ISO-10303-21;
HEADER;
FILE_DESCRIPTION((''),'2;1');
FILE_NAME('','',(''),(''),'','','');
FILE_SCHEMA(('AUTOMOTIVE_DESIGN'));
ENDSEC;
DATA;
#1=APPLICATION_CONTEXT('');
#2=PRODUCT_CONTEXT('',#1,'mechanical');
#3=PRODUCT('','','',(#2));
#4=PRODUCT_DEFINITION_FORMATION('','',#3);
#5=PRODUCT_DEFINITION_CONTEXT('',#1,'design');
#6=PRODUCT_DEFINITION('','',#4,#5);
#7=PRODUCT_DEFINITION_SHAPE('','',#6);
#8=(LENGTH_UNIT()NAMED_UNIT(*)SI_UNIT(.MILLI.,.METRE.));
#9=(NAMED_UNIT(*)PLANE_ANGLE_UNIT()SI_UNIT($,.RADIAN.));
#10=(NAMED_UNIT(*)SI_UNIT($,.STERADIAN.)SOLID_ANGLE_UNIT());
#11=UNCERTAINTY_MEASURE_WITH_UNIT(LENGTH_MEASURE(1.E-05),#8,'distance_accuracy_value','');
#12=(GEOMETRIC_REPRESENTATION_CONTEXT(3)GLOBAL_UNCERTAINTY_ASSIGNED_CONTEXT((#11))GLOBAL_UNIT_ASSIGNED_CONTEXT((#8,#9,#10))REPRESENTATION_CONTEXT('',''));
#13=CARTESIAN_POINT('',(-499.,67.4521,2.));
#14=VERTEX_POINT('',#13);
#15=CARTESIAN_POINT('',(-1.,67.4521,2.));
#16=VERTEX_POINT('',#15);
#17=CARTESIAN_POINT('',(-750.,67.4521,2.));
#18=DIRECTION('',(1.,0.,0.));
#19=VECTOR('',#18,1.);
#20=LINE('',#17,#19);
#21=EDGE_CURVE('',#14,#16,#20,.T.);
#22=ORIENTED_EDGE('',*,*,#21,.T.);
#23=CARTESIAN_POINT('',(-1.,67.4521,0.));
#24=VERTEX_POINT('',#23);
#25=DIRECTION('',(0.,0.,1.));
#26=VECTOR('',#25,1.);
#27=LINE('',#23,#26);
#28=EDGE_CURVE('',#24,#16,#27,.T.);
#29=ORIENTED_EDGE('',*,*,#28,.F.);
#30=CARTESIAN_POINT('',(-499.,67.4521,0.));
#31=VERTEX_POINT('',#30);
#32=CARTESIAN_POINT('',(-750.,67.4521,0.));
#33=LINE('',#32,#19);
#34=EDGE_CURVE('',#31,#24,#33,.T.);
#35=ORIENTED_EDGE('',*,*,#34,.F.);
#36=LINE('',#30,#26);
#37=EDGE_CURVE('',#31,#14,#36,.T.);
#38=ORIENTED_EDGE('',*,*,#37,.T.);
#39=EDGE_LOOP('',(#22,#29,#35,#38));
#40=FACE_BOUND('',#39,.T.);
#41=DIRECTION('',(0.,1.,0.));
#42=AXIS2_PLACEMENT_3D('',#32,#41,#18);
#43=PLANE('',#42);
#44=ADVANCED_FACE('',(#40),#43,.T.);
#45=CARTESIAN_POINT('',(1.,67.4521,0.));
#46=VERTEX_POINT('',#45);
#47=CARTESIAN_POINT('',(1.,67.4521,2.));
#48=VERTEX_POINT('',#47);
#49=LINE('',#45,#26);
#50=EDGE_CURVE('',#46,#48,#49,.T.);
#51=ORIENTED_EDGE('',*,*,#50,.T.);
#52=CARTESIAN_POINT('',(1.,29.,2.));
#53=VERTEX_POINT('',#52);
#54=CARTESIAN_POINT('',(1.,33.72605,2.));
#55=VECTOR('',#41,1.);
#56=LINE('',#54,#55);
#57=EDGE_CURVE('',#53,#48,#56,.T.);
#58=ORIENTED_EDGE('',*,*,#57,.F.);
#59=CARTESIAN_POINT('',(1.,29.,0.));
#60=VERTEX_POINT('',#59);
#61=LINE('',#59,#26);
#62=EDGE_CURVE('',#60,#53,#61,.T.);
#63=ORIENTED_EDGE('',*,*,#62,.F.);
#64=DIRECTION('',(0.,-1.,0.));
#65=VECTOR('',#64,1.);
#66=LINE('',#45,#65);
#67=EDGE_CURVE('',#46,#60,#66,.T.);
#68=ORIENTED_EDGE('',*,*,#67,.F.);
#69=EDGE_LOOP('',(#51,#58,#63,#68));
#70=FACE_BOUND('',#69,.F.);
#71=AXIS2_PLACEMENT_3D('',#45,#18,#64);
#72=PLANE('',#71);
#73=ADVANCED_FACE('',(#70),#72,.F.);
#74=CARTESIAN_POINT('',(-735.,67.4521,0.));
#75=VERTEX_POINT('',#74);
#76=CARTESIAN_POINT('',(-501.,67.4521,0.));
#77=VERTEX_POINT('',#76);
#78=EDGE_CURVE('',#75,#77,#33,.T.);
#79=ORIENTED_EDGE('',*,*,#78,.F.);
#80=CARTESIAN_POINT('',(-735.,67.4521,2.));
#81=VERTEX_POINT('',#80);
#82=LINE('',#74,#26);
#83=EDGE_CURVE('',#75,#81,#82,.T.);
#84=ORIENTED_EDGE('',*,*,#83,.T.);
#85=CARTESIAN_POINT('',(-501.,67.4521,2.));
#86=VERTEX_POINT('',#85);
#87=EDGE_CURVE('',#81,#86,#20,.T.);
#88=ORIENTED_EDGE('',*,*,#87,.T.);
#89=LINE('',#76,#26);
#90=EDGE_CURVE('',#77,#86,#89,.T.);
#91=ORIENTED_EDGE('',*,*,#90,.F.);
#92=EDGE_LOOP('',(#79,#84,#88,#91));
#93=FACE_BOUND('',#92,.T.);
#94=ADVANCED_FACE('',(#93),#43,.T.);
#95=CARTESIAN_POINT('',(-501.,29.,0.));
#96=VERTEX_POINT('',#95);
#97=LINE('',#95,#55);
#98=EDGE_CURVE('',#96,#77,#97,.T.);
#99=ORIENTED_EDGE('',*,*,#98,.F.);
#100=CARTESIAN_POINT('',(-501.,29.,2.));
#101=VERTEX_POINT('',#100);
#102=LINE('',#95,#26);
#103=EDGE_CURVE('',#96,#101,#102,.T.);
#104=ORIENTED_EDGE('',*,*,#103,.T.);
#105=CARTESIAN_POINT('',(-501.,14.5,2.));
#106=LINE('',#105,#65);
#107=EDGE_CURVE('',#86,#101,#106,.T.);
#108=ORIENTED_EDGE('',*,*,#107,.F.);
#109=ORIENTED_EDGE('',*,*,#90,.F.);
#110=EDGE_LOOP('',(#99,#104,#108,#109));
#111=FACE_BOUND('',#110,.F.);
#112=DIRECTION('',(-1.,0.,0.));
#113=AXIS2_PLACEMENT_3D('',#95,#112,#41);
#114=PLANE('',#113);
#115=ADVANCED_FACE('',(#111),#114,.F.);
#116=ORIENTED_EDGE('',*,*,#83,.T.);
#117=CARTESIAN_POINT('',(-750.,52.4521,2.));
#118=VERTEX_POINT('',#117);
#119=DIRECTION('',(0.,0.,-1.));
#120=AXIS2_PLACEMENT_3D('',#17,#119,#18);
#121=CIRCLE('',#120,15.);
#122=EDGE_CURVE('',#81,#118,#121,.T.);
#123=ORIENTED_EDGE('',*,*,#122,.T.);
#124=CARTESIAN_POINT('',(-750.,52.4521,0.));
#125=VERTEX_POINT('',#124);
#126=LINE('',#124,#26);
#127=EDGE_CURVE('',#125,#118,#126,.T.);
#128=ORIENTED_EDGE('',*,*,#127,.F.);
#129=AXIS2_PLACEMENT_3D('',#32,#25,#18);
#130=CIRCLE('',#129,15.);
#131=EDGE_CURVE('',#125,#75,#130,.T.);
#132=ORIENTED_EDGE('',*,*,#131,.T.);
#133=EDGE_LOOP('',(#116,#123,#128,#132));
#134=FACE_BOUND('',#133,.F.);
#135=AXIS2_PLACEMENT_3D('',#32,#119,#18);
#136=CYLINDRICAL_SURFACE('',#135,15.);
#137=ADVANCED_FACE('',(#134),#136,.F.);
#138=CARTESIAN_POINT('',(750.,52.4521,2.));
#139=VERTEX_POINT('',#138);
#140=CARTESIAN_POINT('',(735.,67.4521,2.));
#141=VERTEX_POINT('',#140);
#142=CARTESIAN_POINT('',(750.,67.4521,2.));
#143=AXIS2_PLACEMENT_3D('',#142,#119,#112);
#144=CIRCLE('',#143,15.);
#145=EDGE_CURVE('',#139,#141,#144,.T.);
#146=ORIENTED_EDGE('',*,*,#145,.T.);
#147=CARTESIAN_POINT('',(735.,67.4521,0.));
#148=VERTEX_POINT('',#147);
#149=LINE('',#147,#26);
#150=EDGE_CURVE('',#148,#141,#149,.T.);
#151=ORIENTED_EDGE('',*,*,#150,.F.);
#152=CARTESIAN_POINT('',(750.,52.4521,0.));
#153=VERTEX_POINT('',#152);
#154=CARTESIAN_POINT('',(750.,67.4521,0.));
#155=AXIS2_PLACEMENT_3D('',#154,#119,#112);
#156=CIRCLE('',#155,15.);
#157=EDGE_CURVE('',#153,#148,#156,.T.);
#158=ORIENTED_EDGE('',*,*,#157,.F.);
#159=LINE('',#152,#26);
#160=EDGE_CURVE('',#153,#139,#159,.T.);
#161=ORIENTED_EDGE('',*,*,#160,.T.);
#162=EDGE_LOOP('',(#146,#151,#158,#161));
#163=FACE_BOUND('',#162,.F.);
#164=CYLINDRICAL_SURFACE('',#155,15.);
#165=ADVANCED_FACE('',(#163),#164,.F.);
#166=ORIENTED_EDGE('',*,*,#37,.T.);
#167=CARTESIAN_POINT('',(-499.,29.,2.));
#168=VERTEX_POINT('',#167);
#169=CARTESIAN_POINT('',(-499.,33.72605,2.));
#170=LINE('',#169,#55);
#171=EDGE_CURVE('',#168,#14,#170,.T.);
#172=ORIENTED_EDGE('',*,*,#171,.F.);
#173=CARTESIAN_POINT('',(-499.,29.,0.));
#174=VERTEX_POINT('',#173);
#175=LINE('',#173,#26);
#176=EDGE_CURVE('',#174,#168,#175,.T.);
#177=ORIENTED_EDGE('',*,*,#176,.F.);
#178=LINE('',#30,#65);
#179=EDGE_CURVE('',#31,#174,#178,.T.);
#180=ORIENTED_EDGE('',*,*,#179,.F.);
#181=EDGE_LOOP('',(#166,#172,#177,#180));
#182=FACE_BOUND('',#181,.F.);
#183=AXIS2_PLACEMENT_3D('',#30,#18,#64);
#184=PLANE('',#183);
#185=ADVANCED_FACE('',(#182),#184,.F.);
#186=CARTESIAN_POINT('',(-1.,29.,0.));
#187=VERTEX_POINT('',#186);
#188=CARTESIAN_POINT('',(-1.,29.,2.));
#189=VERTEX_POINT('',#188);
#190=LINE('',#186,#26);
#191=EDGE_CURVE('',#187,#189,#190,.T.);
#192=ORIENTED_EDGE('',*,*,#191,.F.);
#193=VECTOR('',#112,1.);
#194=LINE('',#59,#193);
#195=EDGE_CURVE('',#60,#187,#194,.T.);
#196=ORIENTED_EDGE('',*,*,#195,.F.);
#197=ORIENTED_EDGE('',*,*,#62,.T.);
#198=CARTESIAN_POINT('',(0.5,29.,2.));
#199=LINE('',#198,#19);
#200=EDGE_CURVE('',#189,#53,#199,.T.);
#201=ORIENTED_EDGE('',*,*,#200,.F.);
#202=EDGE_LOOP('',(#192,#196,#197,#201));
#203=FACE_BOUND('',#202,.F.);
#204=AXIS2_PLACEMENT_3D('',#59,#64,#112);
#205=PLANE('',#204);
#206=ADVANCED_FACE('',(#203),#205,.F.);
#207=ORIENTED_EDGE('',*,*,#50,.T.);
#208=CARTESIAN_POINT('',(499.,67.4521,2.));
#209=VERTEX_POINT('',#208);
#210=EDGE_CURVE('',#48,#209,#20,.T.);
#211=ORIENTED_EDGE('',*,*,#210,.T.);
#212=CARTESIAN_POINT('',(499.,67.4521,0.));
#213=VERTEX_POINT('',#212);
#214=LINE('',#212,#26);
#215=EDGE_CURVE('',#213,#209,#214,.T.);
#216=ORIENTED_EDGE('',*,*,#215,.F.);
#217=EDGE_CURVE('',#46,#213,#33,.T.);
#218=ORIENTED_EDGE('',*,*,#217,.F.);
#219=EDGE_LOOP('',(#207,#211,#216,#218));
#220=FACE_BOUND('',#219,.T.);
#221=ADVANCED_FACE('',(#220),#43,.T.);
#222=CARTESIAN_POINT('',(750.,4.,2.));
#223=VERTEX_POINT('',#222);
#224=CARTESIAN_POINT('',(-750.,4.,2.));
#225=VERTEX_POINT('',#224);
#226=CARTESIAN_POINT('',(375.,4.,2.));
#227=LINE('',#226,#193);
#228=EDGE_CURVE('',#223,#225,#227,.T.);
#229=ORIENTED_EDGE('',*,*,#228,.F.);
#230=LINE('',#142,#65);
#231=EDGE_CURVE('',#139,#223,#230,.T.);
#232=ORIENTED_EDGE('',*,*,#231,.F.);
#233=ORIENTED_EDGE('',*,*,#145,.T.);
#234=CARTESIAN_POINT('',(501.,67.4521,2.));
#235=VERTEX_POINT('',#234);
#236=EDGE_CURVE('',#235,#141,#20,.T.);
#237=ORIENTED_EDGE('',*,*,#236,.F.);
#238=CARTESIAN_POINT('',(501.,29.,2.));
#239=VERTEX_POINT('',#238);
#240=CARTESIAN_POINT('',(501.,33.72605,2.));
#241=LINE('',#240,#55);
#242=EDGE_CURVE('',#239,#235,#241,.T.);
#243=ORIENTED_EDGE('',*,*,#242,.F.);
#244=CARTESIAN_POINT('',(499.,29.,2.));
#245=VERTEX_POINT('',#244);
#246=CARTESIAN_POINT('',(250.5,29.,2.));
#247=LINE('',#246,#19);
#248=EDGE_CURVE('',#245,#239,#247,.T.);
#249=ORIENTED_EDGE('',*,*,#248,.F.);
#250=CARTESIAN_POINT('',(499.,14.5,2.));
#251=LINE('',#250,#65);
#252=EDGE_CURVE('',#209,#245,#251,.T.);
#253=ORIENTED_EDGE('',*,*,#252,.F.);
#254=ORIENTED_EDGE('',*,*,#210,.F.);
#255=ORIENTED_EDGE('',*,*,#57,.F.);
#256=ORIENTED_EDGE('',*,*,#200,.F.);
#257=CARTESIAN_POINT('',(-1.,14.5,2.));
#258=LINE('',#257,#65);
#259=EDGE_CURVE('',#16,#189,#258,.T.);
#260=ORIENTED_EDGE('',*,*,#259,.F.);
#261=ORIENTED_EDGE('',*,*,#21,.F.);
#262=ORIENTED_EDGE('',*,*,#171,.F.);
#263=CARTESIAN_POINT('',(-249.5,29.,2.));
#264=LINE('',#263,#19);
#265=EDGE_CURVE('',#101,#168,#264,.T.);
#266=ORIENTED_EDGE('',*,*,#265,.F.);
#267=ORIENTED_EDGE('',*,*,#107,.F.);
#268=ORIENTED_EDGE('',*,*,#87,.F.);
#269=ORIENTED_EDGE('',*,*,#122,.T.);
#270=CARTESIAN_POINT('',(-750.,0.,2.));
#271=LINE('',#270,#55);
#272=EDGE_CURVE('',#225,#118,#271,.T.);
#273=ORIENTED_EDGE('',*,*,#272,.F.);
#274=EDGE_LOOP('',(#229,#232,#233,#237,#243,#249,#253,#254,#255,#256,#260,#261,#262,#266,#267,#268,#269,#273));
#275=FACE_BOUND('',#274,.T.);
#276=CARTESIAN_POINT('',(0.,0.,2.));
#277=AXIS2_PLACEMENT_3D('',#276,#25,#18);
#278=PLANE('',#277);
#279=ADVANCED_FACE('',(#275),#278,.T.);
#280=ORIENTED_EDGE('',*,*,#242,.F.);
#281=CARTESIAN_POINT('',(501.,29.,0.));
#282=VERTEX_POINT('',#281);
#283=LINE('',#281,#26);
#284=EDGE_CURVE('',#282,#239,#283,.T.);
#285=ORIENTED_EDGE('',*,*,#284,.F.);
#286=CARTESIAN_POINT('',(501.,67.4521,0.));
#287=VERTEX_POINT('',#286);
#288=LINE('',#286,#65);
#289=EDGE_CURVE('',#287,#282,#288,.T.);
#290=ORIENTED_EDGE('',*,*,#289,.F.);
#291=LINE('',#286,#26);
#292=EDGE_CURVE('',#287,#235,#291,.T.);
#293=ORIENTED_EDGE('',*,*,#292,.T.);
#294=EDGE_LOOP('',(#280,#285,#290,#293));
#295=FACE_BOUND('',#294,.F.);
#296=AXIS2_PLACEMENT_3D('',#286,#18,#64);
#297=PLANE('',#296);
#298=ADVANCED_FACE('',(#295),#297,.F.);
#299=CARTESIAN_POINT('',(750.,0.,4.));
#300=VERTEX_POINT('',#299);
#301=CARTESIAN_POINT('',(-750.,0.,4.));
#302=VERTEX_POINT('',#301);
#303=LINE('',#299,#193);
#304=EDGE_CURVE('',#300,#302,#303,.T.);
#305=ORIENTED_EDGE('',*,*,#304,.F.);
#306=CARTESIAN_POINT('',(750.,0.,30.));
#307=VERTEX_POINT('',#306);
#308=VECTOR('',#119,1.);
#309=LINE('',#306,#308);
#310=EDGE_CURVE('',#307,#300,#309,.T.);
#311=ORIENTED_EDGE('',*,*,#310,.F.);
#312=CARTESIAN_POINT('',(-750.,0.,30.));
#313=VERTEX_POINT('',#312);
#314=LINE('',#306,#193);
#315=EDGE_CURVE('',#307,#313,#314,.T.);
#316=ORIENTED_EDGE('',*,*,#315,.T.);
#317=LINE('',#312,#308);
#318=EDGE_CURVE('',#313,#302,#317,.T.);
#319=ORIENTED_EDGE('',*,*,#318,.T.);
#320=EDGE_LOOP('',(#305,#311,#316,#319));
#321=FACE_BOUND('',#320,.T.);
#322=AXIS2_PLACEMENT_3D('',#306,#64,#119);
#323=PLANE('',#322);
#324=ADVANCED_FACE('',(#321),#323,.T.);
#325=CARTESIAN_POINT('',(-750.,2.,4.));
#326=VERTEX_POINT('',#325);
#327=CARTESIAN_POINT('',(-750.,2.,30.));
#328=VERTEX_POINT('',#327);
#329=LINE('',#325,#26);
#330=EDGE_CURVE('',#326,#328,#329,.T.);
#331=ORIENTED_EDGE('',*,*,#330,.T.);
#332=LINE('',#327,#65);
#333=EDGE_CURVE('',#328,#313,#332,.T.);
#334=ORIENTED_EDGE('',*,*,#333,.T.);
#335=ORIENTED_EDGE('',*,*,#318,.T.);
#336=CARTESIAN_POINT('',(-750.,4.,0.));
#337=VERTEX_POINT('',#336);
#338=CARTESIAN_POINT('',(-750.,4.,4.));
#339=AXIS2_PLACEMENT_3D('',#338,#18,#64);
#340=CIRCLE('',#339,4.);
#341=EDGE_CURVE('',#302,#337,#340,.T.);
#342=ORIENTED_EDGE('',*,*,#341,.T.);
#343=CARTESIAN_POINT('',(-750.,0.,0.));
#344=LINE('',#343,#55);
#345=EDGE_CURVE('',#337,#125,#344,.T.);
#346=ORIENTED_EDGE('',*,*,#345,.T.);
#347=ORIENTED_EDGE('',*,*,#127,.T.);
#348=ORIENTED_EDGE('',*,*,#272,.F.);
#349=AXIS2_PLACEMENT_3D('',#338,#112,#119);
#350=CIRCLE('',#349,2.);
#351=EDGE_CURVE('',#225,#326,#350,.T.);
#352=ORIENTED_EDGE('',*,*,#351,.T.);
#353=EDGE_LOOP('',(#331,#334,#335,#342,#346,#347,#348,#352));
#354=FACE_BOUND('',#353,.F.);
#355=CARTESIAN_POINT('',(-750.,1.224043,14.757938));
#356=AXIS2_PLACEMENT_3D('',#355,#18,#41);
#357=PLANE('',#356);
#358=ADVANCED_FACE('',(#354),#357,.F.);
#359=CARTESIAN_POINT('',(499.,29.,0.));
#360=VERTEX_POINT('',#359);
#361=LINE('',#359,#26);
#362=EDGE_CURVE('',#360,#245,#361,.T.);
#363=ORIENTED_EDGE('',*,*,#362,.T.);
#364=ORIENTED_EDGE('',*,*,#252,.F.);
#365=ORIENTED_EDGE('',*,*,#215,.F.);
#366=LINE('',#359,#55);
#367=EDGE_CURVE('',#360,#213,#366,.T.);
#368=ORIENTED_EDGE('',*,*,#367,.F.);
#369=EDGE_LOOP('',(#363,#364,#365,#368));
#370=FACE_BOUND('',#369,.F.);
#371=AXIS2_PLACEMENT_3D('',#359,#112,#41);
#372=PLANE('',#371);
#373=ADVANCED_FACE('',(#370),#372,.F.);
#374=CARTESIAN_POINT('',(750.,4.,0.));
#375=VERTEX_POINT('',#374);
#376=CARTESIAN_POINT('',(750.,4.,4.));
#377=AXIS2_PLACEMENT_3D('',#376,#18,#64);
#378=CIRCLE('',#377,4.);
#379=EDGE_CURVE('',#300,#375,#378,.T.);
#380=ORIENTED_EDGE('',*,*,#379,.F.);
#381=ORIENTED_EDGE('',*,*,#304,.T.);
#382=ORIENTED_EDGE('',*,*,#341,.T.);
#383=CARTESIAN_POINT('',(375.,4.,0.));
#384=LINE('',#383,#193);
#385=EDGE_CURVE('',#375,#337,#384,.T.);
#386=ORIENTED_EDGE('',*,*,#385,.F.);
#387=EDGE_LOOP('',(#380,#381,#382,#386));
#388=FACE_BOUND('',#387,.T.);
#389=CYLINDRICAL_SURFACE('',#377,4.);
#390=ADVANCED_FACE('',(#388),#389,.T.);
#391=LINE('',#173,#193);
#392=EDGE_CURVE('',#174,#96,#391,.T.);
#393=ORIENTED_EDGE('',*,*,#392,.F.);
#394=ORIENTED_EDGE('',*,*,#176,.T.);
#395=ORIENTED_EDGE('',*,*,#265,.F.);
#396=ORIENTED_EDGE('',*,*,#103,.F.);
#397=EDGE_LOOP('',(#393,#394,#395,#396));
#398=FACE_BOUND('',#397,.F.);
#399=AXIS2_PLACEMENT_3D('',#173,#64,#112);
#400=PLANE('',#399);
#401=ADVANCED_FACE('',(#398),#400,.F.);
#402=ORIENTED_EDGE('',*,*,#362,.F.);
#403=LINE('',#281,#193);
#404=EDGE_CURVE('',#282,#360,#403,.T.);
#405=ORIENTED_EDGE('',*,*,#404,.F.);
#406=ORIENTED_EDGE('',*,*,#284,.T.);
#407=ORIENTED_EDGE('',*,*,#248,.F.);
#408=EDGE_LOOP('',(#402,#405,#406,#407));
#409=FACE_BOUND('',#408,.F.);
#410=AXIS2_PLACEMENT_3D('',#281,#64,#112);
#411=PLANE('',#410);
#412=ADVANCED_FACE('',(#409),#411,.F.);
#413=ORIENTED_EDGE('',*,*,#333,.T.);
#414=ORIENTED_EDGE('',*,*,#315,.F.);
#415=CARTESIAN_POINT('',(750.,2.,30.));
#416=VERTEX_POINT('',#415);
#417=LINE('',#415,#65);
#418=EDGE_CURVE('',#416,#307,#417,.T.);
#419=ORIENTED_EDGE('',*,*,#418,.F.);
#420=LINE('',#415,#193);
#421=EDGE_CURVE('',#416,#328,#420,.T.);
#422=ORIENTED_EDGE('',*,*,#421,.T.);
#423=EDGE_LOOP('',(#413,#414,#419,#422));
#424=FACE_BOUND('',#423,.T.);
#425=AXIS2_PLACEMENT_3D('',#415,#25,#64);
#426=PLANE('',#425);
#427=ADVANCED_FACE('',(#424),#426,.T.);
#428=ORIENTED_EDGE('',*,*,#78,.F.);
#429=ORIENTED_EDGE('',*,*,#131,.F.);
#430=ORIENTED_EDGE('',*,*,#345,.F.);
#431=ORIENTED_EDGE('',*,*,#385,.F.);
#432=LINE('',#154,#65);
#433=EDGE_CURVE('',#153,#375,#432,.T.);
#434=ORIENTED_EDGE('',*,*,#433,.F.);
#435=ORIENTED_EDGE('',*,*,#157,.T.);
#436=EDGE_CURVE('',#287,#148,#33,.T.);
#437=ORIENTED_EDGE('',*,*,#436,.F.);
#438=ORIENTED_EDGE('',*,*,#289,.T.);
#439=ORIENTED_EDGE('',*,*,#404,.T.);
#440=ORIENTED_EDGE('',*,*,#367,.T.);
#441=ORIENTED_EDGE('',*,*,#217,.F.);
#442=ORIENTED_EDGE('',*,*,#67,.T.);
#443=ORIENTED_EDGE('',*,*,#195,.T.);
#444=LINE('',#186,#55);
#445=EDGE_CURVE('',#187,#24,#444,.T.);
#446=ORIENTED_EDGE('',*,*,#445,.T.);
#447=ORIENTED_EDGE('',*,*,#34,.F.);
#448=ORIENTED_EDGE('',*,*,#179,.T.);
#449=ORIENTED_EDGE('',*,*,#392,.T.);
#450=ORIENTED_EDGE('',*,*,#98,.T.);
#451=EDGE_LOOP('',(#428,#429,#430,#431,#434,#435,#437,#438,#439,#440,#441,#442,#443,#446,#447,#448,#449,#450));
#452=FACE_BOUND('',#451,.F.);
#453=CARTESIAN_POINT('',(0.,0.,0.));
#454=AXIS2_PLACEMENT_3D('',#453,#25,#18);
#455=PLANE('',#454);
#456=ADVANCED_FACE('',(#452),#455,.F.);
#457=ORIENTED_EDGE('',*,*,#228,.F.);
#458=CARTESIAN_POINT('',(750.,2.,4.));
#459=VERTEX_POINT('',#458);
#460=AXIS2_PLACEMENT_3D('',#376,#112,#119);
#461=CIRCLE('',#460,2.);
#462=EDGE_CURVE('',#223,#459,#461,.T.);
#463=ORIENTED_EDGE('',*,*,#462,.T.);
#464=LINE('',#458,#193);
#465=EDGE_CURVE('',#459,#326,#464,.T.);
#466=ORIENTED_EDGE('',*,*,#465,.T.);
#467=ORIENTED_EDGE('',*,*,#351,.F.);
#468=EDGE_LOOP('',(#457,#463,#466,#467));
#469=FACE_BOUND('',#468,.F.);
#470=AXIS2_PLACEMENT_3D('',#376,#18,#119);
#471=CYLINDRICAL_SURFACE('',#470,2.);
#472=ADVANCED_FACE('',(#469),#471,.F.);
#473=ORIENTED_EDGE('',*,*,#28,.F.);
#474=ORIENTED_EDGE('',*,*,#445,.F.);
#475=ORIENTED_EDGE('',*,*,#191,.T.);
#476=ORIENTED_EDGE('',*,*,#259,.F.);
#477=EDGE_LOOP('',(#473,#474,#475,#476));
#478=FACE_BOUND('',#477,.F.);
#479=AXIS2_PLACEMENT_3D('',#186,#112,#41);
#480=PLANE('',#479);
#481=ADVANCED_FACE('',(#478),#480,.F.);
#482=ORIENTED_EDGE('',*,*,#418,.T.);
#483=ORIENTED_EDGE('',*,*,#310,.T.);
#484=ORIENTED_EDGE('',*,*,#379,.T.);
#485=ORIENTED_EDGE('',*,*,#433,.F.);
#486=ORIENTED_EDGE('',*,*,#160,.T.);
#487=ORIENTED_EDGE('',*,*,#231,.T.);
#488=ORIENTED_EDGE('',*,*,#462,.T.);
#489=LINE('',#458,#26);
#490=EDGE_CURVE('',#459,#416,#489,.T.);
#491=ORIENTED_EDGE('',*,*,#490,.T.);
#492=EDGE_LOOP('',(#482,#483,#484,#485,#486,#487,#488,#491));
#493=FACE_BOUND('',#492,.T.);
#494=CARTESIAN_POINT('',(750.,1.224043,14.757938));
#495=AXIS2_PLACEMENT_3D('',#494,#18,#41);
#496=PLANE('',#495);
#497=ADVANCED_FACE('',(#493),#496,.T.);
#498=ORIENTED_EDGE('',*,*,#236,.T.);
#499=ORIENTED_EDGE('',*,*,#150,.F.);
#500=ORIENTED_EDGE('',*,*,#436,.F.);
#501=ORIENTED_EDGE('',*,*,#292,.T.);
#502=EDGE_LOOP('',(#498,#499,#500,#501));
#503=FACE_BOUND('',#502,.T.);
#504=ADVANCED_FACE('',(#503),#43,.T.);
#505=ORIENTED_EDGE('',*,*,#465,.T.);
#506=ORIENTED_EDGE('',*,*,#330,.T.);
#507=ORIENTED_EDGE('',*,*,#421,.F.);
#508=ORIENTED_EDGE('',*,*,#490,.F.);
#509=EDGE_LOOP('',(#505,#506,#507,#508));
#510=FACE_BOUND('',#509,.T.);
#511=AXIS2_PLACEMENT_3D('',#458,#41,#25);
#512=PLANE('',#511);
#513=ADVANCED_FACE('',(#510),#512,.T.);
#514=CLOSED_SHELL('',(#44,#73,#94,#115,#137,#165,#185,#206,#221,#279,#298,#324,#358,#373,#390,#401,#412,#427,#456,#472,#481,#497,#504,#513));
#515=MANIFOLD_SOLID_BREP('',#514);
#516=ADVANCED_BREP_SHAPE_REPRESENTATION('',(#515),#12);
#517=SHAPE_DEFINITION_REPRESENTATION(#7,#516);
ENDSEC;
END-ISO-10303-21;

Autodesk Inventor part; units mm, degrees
ref_plane "YZ Plane" through (0, 0, 0) normal (1, 0, 0) x (0, 1, 0)
ref_plane "XZ Plane" through (0, 0, 0) normal (0, 1, 0) x (-1, 0, 0)
ref_plane "XY Plane" through (0, 0, 0) normal (0, 0, 1) x (1, 0, 0)
sketch "Sketch1" plane through (0, 0, 0) normal (0, 0, 1) x (1, 0, 0)
  line L0 (-750, 67.4521) -> (750, 67.4521)
  line L1 (750, 67.4521) -> (750, 0)
  line L2 (750, 0) -> (-750, 0)
  line L3 (-750, 0) -> (-750, 67.4521)
  point P0 (0, 0)
  point P1 (0, 0)
  dimension "d0" = 1500
  dimension "d1" = 67.4521
extrude "Plate1" add sketch "Sketch1" along normal blind 2
sketch "Sketch2" plane through (750, 2, 0) normal (0, -1, 0) x (1, 0, 0)
  line L0 (-1500, 0) -> (0, 0)
  line L1 (0, 0) -> (0, 30)
  line L2 (0, 30) -> (-1500, 30)
  line L3 (-1500, 30) -> (-1500, 0)
edge flange "Flange1" height 30 angle 90 thickness 2 bend radius 2 thickness toward (0, -1, 0) relief tear relief width 2 relief depth 1 edges at (0, 0, 2) wall of the first edge with corners at (-750, 2, 0) (750, 2, 0) (750, 2, 30) (-750, 2, 30)
bend "Bend1"
corner "Corner1"
sketch "Sketch5" plane through (0, 0, 0) normal (0, 0, -1) x (-1, 0, 0)
  line L0 (750, 67.4521) -> (-750, 67.4521) projected
  line L1 (499, 67.4521) -> (499, 29)
  line L2 (499, 29) -> (501, 29)
  line L3 (501, 29) -> (501, 67.4521)
  line L4 (750, 0) -> (-750, 0) projected
  point P0 (0, 0)
  point P1 (500, 29)
  dimension "d18" = 2
  dimension "d20" = 29
  dimension "d27" = 250
extrude "Extrusion1" cut sketch "Sketch5" against normal through all
pattern_linear "Rectangular Pattern1" count 3 spacing 500 along (1, 0, 0) of "Extrusion1"
sketch "Sketch6" plane through (0, 0, 0) normal (0, 0, -1) x (-1, 0, 0)
  line L0 (-750, 67.4521) -> (-750, 4) projected
  circle A0 centre (-750, 67.4521) radius 15
  line L1 (-750, 67.4521) -> (-501, 67.4521) projected
  point P0 (0, 0)
  point P1 (-735, 67.4521)
  point P2 (-750, 52.4521)
  dimension "d24" = 30
extrude "Extrusion2" cut sketch "Sketch6" against normal through all contours L1 A0 L0 picked at (-740.1254, 66.3395)
mirror "Mirror1" about plane through (0, 0, 0) normal (1, 0, 0) of "Extrusion2"
equation "\"d1\" = Стрингер_2"
equation "\"d18\" = Thickness"
equation "\"d2\" = Thickness"
equation "\"d3\" = BendReliefWidth"
equation "\"d4\" = BendReliefDepth"
equation "\"d5\" = MinimumRemnant"
equation "\"d6\" = TransitionRadius"
equation "\"d9\" = BendRadius"
equation "\"d10\" = CornerReliefSize"
equation "\"d11\" = GapSize"
equation "\"d12\" = JacobiRadiusSize"
equation "\"BendRadius\" = Thickness"
equation "\"BendReliefWidth\" = Thickness"
equation "\"BendReliefDepth\" = 0.5 * Thickness"
equation "\"CornerReliefSize\" = 4 * Thickness"
equation "\"MinimumRemnant\" = 2 * Thickness"
equation "\"TransitionRadius\" = BendRadius"
equation "\"JacobiRadiusSize\" = BendRadius"
equation "\"GapSize\" = Thickness"
equation "\"qqqqqq\" = 67.35706"
equation "\"Стрингер_2\" = 67.452127"
equation "\"Thickness\" = 2"
properties part number "МОО 052 стрингер спина 21" material "Stainless Steel"
